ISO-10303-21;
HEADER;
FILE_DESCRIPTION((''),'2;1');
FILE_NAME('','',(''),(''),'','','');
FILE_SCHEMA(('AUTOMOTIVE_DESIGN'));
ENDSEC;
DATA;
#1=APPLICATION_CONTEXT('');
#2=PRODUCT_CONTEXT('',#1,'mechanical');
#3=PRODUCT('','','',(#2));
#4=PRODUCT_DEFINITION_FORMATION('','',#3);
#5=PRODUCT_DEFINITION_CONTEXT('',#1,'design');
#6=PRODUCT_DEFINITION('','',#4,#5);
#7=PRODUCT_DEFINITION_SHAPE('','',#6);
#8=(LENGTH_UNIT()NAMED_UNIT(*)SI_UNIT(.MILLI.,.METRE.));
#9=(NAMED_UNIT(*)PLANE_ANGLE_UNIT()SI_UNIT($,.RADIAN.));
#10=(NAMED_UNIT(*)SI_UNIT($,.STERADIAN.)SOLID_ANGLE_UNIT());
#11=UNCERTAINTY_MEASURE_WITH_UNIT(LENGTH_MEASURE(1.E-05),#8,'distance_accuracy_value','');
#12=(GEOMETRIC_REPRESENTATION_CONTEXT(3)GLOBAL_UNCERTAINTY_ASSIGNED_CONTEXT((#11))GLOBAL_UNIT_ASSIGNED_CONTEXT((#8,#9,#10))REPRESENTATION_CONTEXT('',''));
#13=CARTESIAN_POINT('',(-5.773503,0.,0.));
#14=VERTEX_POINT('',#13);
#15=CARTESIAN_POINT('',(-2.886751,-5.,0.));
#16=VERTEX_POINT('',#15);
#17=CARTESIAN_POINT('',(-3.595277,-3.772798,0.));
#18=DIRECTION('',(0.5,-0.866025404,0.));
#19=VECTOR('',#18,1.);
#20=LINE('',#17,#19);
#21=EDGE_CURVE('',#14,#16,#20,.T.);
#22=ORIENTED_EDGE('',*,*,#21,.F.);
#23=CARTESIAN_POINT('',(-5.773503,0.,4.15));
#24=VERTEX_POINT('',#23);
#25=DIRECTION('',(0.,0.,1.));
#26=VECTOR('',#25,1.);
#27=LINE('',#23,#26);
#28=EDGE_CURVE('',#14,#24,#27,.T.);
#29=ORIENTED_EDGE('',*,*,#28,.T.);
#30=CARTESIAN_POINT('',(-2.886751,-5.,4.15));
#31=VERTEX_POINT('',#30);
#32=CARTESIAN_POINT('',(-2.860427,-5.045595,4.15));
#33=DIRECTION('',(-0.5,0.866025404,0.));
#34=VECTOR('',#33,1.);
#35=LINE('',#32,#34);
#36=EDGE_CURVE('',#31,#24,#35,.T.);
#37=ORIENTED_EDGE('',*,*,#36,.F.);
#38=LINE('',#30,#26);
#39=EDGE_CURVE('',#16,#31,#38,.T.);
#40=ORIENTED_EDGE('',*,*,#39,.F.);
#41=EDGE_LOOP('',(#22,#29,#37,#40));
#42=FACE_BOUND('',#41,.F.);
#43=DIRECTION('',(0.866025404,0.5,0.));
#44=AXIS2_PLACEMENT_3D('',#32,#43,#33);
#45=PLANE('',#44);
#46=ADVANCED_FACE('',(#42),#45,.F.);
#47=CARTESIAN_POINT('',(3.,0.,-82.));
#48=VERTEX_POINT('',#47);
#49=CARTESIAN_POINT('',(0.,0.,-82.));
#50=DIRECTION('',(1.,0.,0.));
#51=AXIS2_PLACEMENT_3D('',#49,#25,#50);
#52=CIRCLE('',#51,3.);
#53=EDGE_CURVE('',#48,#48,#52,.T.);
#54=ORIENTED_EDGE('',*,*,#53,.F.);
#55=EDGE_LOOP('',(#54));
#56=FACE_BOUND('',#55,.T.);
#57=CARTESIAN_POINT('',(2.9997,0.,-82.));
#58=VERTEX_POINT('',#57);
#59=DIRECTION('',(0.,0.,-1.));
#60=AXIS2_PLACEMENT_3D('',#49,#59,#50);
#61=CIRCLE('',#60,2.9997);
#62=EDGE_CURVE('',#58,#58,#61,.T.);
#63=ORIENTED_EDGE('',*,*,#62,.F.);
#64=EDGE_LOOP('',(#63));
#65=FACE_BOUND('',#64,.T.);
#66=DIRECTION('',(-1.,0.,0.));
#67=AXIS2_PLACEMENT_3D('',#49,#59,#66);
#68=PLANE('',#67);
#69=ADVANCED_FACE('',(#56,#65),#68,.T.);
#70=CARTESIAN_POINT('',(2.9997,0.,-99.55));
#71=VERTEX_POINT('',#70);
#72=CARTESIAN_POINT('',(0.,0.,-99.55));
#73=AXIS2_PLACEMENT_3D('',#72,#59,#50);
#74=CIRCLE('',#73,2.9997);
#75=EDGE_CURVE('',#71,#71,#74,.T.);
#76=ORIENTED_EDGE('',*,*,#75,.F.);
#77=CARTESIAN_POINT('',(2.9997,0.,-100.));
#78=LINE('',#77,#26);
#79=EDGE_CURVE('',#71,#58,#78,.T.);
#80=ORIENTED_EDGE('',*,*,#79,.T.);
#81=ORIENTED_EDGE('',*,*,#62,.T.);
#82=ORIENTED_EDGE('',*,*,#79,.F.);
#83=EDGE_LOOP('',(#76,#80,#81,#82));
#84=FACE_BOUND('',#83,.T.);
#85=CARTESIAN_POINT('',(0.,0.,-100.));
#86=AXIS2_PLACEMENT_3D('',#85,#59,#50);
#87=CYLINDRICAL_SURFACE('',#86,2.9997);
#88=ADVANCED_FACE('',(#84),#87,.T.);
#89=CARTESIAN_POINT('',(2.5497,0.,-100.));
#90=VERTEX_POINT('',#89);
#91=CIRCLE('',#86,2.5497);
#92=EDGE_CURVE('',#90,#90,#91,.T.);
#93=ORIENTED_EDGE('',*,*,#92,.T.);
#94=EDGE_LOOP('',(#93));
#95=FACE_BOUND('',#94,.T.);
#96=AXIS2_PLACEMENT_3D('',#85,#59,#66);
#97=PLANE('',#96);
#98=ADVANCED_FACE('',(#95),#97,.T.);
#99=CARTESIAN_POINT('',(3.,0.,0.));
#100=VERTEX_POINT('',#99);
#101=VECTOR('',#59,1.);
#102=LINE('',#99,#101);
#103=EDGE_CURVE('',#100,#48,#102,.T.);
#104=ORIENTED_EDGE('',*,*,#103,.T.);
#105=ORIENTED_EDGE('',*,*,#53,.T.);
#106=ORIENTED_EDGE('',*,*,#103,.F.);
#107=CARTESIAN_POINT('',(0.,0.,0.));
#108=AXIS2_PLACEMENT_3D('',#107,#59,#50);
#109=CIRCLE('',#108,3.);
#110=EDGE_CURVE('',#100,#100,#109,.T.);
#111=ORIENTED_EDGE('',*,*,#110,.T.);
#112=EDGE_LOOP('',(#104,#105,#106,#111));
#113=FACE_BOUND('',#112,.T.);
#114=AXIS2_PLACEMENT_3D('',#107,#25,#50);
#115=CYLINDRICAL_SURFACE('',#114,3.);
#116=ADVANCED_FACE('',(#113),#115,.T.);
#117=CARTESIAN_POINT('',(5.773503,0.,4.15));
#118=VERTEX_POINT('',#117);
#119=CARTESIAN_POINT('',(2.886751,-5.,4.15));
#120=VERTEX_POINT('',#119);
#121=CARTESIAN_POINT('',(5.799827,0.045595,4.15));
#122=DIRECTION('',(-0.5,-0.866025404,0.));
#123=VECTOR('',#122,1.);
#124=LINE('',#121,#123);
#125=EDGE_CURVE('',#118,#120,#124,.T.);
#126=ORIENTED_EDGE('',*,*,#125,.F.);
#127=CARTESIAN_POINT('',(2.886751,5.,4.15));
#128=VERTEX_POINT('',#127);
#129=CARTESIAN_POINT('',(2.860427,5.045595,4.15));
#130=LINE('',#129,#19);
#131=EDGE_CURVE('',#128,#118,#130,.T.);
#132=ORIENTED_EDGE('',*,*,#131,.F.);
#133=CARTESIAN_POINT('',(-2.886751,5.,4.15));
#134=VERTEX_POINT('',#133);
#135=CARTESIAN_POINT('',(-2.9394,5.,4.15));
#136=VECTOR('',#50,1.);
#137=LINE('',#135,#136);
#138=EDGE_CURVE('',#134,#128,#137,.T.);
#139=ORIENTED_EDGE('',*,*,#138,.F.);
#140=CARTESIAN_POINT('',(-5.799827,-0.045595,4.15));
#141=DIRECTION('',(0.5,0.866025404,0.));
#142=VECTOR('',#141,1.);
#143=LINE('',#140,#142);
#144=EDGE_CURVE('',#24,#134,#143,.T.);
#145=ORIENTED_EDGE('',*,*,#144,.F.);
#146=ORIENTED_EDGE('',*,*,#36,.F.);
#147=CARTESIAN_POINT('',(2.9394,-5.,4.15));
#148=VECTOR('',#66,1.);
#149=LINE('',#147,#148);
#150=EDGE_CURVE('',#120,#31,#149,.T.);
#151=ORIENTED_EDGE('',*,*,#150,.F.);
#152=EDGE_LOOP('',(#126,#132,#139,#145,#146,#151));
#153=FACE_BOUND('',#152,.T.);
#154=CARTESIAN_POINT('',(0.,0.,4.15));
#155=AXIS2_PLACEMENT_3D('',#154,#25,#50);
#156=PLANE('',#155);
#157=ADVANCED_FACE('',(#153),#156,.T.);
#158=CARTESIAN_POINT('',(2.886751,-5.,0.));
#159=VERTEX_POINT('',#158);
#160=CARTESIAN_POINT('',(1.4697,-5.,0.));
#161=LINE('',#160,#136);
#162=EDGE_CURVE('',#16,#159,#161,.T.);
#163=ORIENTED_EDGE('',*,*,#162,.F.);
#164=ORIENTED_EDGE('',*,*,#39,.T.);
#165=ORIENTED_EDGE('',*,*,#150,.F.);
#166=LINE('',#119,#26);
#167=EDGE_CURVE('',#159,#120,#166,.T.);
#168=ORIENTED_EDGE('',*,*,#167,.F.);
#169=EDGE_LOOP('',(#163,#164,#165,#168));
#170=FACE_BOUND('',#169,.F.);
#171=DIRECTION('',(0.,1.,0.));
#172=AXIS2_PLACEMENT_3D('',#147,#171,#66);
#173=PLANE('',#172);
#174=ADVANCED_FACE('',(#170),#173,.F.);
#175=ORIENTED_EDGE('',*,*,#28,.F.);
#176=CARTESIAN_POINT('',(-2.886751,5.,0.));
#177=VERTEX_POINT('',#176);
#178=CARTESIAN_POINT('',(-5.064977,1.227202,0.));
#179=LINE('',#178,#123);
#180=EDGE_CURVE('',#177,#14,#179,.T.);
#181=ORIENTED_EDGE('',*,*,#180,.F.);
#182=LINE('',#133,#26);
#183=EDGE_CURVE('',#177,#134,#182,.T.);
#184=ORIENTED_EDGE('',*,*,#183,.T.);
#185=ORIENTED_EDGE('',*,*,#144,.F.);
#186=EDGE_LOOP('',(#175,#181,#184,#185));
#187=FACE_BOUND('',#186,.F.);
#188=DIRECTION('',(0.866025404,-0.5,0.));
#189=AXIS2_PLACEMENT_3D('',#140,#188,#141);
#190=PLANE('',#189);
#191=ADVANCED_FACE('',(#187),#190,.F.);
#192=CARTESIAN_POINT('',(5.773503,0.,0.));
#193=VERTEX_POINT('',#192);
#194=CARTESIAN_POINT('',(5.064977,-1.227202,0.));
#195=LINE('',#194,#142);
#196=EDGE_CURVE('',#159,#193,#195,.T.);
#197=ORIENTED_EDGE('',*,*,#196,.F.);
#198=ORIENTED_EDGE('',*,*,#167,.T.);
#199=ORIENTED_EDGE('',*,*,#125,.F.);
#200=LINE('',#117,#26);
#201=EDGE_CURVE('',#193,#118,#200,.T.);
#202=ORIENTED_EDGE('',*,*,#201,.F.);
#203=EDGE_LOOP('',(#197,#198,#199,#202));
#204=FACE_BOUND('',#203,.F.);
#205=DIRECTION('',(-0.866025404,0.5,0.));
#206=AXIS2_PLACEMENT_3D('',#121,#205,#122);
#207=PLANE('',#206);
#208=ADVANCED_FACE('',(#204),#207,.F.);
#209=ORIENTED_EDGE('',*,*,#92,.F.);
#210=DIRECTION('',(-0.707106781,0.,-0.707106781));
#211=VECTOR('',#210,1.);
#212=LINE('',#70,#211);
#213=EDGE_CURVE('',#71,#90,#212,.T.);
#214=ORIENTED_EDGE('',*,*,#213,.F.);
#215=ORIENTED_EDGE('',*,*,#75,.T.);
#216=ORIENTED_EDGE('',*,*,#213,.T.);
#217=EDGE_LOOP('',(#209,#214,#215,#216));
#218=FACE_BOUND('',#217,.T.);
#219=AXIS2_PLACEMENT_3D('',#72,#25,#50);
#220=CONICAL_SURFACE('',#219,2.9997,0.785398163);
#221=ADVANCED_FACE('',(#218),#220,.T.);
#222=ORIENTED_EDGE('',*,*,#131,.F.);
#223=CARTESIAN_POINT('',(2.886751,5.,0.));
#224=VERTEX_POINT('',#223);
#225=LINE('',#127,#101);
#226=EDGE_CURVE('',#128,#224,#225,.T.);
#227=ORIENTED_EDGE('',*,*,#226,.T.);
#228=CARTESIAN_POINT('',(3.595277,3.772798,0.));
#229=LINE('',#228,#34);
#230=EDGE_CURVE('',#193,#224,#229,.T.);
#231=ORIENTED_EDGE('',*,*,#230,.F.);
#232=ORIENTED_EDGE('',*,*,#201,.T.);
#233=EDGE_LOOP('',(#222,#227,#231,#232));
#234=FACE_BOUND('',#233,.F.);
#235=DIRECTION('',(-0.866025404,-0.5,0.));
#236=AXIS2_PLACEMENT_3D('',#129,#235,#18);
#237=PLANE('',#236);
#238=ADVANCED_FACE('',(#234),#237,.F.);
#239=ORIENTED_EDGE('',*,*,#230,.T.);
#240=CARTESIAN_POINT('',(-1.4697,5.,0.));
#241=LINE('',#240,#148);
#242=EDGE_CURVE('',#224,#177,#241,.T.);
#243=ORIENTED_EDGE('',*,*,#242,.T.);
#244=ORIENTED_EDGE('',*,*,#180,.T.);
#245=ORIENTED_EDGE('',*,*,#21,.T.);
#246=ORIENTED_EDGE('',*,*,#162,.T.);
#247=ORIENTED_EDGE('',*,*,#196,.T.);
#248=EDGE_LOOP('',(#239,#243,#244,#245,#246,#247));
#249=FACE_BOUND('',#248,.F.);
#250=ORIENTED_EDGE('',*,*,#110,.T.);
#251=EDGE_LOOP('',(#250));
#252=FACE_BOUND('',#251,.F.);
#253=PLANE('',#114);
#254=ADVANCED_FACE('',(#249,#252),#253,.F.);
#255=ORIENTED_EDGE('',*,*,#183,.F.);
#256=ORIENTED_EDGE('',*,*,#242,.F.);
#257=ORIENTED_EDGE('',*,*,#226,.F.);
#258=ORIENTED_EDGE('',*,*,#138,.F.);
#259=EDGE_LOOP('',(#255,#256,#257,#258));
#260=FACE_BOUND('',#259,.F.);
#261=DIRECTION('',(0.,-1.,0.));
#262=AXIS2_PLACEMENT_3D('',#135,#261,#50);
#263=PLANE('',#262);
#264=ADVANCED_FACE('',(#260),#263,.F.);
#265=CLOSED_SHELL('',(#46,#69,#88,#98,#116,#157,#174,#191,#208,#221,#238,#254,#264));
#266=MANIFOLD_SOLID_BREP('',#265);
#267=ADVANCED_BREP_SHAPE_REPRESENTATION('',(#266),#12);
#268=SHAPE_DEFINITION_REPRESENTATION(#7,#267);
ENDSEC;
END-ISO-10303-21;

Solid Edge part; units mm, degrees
sketch "Sketch1" plane through (0, 0, 0) normal (0, 0, 1) x (1, 0, 0)
  circle A0 centre (0, 0) radius 5.8
  dimension "D1" = 11.6
extrude "Protrusion1" add sketch "Sketch1" along normal blind 4.15
sketch "Sketch2" plane through (0, 0, 0) normal (0, 0, -1) x (1, 0, 0)
  circle A0 centre (0, 0) radius 3
extrude "Protrusion2" add sketch "Sketch2" along normal blind 100
sketch "Sketch3" plane through (0, 0, -100) normal (0, 0, -1) x (1, 0, 0)
  circle A0 centre (0, 0) radius 2.9997
extrude "Cutout1" cut sketch "Sketch3" against normal blind 18 flip side to cut
chamfer "Chamfer_1" distance 0.45 angle 45 1 edges at (-2.9997, 0, -100)
sketch "Sketch4" plane through (0, 0, 4.15) normal (0, 0, 1) x (1, 0, 0)
  line L0 (-2.9394, 5) -> (2.9394, 5)
  dimension "D1" = 10
extrude "Cutout2" cut sketch "Sketch4" against normal up to next material side at (0, 5.05, 4.15)
pattern_circular "Pattern1" count 6 over 360 about axis through (0, 0, 4.15) along (0, 0, 1) of "Cutout2"
properties part number "24104499"
